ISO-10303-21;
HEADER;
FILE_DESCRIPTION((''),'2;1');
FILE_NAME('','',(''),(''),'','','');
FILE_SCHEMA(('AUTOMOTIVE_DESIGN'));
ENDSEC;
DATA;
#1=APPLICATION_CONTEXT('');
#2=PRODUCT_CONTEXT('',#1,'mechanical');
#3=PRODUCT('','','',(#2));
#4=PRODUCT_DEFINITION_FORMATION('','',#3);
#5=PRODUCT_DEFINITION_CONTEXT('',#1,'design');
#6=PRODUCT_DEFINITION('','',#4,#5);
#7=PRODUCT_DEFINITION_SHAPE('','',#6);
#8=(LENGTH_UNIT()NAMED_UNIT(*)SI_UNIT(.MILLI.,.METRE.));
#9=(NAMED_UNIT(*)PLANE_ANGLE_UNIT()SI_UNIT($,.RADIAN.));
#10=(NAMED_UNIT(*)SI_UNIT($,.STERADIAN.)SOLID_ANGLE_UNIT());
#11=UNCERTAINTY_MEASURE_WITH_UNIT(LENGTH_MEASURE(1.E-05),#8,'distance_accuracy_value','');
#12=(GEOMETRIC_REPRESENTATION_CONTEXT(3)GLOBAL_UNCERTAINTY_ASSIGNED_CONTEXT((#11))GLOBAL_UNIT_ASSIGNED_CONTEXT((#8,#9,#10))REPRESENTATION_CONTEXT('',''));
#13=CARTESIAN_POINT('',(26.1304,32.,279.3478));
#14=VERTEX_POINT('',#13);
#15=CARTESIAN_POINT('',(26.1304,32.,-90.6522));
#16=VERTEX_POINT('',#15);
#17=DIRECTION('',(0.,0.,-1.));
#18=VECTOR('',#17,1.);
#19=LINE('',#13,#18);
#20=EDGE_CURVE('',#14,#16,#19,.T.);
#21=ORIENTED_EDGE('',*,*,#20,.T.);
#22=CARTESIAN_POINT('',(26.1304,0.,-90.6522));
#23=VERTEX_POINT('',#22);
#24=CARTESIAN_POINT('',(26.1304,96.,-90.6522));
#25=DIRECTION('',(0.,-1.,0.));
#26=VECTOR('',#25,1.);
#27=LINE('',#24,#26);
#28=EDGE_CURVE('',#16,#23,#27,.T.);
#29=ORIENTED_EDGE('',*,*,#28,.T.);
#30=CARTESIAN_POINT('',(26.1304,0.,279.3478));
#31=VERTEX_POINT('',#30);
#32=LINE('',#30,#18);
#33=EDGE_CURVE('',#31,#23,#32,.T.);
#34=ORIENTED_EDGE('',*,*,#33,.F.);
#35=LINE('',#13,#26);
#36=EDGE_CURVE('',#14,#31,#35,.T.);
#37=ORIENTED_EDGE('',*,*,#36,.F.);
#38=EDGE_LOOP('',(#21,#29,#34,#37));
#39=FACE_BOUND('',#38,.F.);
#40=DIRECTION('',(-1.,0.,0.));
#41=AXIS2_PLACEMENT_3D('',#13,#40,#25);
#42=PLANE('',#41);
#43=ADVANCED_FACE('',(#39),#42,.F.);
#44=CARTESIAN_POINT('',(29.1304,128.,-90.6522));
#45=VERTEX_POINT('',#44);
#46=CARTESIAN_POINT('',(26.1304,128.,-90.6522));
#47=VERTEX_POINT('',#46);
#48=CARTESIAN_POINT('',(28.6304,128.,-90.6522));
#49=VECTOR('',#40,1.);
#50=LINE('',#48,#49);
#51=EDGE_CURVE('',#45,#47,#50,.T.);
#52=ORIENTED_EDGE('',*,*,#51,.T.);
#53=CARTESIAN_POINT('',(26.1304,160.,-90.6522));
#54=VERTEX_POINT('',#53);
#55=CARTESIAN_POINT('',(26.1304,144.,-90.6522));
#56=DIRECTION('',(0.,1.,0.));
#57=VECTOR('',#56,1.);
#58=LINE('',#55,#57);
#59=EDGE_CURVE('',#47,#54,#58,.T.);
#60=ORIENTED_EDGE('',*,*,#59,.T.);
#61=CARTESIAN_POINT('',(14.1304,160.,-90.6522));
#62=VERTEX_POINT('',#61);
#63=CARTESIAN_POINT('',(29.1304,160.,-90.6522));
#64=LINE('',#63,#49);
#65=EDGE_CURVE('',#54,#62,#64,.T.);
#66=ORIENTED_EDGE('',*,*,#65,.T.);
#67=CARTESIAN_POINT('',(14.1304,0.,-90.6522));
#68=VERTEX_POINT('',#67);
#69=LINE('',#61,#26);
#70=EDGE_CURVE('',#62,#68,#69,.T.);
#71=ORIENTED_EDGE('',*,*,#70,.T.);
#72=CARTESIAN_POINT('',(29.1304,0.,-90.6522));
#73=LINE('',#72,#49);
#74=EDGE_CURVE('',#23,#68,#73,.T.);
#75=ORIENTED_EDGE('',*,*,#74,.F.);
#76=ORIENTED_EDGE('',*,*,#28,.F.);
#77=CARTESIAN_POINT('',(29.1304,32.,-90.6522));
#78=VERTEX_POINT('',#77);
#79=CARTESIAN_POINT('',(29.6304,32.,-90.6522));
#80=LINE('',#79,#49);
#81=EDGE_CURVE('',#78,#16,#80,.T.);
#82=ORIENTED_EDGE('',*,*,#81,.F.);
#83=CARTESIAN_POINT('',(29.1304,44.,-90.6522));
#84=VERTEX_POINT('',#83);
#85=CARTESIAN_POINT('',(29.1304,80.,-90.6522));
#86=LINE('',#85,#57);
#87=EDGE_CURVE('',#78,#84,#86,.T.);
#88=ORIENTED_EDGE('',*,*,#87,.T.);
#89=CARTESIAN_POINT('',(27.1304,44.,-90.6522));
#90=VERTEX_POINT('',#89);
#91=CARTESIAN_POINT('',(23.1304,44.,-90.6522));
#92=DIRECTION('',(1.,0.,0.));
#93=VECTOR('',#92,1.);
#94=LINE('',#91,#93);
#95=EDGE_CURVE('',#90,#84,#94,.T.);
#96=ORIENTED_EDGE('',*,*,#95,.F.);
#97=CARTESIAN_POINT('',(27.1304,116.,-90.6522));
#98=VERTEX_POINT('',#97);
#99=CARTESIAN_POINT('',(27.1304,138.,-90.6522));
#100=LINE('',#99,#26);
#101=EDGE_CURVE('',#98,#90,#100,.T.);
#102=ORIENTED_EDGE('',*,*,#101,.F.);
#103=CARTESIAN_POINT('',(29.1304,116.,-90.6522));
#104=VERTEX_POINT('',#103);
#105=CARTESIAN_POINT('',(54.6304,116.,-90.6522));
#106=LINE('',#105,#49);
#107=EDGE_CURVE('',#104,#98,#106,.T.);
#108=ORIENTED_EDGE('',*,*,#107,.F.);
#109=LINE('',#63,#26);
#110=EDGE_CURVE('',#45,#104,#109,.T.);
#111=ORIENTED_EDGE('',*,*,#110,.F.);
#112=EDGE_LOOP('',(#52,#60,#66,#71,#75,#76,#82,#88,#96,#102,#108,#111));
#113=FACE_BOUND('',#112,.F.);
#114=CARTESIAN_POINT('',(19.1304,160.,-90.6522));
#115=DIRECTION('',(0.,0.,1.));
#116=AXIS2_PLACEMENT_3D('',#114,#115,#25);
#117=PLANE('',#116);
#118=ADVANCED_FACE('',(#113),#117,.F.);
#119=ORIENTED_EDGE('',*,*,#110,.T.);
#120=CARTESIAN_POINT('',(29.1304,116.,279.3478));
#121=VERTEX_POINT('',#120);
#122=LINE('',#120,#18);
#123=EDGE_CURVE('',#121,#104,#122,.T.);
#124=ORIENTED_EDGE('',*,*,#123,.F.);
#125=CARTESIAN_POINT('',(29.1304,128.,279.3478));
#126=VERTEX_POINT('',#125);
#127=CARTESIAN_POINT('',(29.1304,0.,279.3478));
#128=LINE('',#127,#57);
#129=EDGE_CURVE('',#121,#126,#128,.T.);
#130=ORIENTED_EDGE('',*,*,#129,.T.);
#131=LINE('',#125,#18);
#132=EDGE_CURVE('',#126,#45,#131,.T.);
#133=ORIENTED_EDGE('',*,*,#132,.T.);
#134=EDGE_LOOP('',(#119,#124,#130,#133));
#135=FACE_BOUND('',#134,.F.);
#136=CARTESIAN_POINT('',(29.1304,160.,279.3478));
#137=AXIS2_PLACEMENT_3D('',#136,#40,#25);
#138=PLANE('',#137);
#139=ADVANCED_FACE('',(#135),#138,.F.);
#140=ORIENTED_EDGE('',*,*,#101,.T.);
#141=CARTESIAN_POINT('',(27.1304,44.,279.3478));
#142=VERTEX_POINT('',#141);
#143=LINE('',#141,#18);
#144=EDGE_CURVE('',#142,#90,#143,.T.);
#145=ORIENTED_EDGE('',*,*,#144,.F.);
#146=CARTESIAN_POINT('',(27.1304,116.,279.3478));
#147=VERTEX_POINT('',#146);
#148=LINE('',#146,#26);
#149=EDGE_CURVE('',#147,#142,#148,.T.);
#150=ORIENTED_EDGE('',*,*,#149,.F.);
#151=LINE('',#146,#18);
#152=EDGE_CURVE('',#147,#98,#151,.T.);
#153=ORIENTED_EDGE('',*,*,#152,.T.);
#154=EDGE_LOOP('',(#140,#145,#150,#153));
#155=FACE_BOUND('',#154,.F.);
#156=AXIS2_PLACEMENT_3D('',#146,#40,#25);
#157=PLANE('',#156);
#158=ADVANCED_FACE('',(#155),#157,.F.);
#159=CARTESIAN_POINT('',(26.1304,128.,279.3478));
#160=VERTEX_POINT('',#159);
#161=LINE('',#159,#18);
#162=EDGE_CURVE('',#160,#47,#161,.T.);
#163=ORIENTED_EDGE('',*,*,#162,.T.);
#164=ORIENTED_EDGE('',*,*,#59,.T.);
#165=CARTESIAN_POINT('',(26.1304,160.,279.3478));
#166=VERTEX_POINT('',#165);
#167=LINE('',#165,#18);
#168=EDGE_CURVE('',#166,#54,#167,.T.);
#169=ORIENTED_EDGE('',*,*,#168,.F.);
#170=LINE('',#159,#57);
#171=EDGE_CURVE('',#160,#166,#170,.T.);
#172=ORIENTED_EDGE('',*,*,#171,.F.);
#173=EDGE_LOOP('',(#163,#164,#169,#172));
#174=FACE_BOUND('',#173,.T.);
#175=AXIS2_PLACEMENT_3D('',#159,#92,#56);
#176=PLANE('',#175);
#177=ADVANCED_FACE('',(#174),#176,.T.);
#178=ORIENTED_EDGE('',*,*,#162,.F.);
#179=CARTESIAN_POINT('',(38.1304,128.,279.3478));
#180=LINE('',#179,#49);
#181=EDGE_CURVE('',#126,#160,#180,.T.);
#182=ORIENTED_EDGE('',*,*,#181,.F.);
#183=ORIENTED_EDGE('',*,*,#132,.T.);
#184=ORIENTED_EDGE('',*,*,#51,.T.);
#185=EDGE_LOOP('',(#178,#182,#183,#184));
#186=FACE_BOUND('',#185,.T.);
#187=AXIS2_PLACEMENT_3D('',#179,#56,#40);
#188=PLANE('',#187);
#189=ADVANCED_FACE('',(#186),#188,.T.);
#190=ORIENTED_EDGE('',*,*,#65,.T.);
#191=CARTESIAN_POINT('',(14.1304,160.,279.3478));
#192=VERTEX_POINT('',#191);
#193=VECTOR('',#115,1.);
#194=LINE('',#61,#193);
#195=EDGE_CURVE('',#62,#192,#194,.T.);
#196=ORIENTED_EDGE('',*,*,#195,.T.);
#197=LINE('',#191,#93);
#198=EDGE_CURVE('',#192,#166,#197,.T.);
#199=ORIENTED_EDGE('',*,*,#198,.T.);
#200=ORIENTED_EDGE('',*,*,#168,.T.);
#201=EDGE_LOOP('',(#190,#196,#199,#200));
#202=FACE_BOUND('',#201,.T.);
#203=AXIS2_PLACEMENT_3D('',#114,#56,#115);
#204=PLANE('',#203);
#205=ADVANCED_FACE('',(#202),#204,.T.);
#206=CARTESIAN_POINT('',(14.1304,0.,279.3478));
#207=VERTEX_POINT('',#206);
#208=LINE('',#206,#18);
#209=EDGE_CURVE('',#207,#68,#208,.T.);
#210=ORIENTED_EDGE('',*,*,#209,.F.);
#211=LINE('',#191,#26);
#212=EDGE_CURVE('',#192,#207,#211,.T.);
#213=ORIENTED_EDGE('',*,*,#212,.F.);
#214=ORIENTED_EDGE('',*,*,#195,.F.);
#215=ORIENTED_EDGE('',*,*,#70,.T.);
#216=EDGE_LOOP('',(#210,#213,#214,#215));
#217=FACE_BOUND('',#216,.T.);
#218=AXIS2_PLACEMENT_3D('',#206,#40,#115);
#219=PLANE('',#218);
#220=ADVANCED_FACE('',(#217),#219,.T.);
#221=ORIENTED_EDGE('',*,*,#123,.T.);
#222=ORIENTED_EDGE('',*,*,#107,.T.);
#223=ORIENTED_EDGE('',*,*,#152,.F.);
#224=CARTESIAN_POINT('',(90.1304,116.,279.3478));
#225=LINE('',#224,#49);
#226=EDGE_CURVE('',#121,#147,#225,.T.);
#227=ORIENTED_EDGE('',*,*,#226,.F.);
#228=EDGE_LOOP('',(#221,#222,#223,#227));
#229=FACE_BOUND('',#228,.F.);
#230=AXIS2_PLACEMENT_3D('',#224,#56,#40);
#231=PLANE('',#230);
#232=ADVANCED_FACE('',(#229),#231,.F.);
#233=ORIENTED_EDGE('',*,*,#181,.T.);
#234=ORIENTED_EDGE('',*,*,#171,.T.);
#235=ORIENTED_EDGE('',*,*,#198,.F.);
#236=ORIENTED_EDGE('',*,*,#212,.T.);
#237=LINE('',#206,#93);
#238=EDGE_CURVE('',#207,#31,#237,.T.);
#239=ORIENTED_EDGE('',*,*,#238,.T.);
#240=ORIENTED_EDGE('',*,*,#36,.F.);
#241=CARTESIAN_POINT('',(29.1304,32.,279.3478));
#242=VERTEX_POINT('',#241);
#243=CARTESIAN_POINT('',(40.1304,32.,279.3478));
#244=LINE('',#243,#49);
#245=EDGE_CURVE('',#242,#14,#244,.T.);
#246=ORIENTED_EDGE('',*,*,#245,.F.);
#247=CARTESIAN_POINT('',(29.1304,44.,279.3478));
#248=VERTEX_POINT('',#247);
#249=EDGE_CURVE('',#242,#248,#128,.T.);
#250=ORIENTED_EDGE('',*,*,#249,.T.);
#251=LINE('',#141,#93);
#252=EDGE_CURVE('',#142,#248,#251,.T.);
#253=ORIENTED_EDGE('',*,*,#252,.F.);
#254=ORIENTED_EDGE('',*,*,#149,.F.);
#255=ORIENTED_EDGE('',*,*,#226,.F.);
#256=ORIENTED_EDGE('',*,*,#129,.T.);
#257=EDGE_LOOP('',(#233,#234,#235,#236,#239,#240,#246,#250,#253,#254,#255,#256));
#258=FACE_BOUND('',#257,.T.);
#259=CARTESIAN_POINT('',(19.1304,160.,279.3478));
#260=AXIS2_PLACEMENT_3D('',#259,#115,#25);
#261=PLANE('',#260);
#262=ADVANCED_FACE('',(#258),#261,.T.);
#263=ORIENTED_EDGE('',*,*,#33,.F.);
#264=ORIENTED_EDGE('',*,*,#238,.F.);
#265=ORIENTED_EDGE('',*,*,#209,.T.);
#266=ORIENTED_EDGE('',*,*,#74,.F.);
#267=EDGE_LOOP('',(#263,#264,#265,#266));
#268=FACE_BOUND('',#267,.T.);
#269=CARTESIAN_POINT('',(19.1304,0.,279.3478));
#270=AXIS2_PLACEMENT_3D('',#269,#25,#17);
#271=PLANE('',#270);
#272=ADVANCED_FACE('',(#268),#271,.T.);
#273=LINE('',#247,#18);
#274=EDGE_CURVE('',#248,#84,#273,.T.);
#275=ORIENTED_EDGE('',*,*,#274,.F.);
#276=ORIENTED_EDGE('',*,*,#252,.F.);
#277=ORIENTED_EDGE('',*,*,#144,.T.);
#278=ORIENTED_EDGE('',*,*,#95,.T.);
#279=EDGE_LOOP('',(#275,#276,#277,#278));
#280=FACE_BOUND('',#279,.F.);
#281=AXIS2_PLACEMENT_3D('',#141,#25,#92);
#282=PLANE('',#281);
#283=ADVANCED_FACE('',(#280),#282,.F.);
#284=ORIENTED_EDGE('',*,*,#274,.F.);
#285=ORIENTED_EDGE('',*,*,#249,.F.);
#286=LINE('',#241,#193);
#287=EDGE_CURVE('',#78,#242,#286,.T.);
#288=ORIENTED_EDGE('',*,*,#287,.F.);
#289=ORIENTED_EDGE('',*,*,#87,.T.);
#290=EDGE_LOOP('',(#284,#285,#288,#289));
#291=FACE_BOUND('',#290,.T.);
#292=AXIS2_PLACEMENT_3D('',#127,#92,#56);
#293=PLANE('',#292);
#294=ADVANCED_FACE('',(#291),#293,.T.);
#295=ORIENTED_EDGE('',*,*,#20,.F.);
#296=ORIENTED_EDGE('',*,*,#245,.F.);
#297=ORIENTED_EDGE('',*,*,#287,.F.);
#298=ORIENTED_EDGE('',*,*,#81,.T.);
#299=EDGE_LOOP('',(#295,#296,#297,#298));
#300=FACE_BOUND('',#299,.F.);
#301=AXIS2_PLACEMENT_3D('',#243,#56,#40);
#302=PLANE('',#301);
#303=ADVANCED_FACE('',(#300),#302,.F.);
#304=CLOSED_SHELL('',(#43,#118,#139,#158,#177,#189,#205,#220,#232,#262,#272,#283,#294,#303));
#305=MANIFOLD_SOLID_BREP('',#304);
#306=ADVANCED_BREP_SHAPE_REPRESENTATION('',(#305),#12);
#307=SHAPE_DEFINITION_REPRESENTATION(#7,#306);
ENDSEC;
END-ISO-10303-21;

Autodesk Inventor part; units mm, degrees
ref_plane "YZ Plane" through (0, 0, 0) normal (1, 0, 0) x (0, 1, 0)
ref_plane "XZ Plane" through (0, 0, 0) normal (0, 1, 0) x (-1, 0, 0)
ref_plane "XY Plane" through (0, 0, 0) normal (0, 0, 1) x (1, 0, 0)
sketch "Sketch1" plane through (0, 0, 0) normal (0, 1, 0) x (-1, 0, 0)
  line L0 (0, 279.3478) -> (-39.1304, 279.3478)
  line L1 (-39.1304, 279.3478) -> (-39.1304, -195.6522)
  line L2 (-39.1304, -195.6522) -> (0, -195.6522)
  line L3 (0, -195.6522) -> (0, 279.3478)
  line L4 (-39.1304, 279.3478) -> (-29.1304, 279.3478)
  line L5 (-29.1304, 254.3478) -> (-39.1304, 254.3478)
  line L6 (-39.1304, 254.3478) -> (-39.1304, 279.3478)
  line L7 (-39.1304, -195.6522) -> (-29.1304, -195.6522)
  line L8 (-29.1304, -170.6522) -> (-39.1304, -170.6522)
  line L9 (-39.1304, -170.6522) -> (-39.1304, -195.6522)
  point P0 (0, 0)
  point P1 (-39.1304, 254.3478)
  dimension "d0" = 475
  dimension "d4" = 25
  dimension "d5" = 25
extrude "Extrusion1" add sketch "Sketch1" along normal blind 160
sketch "Sketch2" plane through (0, 0, 279.3478) normal (0, 0, 1) x (1, 0, 0)
  line L0 (0, 160) -> (39.1304, 160) projected
  line L1 (0, 160) -> (39.1304, 160)
  line L2 (39.1304, 160) -> (39.1304, 0)
  line L3 (39.1304, 0) -> (0, 0)
  line L4 (0, 0) -> (0, 160)
  line L5 (39.1304, 160) -> (29.1304, 160)
  line L6 (29.1304, 160) -> (29.1304, 115)
  line L7 (29.1304, 115) -> (39.1304, 115)
  line L8 (39.1304, 115) -> (39.1304, 160)
  line L9 (39.1304, 0) -> (29.1304, 0)
  line L10 (29.1304, 0) -> (29.1304, 45)
  line L11 (29.1304, 45) -> (39.1304, 45)
  line L12 (39.1304, 45) -> (39.1304, 0)
  circle A0 centre (39.1304, 80) radius 18
  line L13 (35.1304, 75) -> (39.1304, 75)
  line L14 (39.1304, 75) -> (39.1304, 98)
  line L15 (39.1304, 98) -> (35.1304, 98)
  line L16 (35.1304, 98) -> (35.1304, 75)
  line L17 (35.1304, 75) -> (39.1304, 75)
  line L18 (39.1304, 75) -> (39.1304, 62)
  line L19 (39.1304, 62) -> (35.1304, 62)
  line L20 (35.1304, 62) -> (35.1304, 75)
  line L21 (39.1304, 0) -> (39.1304, 160) projected
  line L22 (0, 160) -> (19.1304, 160)
  line L23 (19.1304, 160) -> (19.1304, 0)
  line L24 (19.1304, 0) -> (0, 0)
  line L25 (0, 0) -> (0, 160)
  point P0 (0, 0)
  point P1 (34.1304, 115)
  point P2 (34.1304, 160)
  point P3 (39.1304, 45)
  point P4 (39.1304, 115)
  dimension "d6" = 10
  dimension "d7" = 45
  dimension "d8" = 45
  dimension "d9" = 4
  dimension "d10" = 36
  dimension "d11" = 80
  dimension "d12" = 80
  dimension "d15" = 20
extrude "Extrusion2" cut sketch "Sketch2" against normal up to surface (475 mm away) contours L0 L23 L3 L4 | L0 L2 L7 L6 | L10 L11 L2 L3 | L2 L13 L16 A0 | A0 L16 L15 | L2 A0 L20 L13 | L19 L20 A0
sketch "Sketch3" plane through (0, 160, 0) normal (0, 1, 0) x (1, 0, 0)
  line L0 (-18, 249) -> (160, 249)
  line L1 (160, 249) -> (160, 90.6522)
  line L2 (160, 90.6522) -> (-18, 90.6522)
  line L3 (-18, 90.6522) -> (-18, 249)
  line L4 (19.1304, -279.3478) -> (29.1304, -279.3478) projected
  point P0 (0, 0)
  dimension "d16" = 370
extrude "Extrusion3" cut sketch "Sketch3" against normal blind 200
sketch "Sketch4" plane through (39.1304, 98, 279.3478) normal (1, 0, 0) x (0, 0, -1)
  line L0 (370, 0) -> (370, 17) projected
  line L1 (370, 17) -> (0, 17) projected
  line L2 (0, 0) -> (0, 17) projected
  line L3 (0, 0) -> (370, 0) projected
  line L4 (370, -53) -> (370, -36) projected
  line L5 (370, -36) -> (0, -36) projected
  line L6 (0, -53) -> (0, -36) projected
  line L7 (0, -53) -> (370, -53) projected
  point P0 (279.3478, -98)
extrude "Extrusion4" add sketch "Sketch4" along normal blind 30
sketch "Sketch5" plane through (19.1304, 0, 279.3478) normal (-1, 0, 0) x (0, 0, 1)
  line L0 (-370, 160) -> (-370, 0) projected
  line L1 (0, 0) -> (-370, 0) projected
  line L2 (0, 160) -> (0, 0) projected
  line L3 (-370, 160) -> (0, 160) projected
  point P0 (-279.3478, 0)
extrude "Extrusion5" add sketch "Sketch5" along normal blind 5
sketch "Sketch6" plane through (29.1304, 115, 279.3478) normal (0, 0, 1) x (1, 0, 0)
  line L0 (9, 13) -> (-3, 13)
  line L1 (-3, 13) -> (-3, 45)
  line L2 (-3, 45) -> (9, 45)
  line L3 (9, 45) -> (9, 13)
  line L4 (-15, -115) -> (0, -115) projected
  line L5 (11, -83) -> (-3, -83)
  line L6 (-3, -83) -> (-3, -115)
  line L7 (-3, -115) -> (11, -115)
  line L8 (11, -115) -> (11, -83)
  line L9 (0, -70) -> (40, -70) projected
  line L10 (0, 0) -> (40, 0) projected
  line L11 (0, 0) -> (0, 45) projected
  point P0 (-29.1304, -115)
  point P1 (0, -115)
  dimension "d23" = 13
  dimension "d24" = 13
  dimension "d25" = 3
extrude "Extrusion6" cut sketch "Sketch6" against normal blind 500
sketch "Sketch7" plane through (35.1304, 62, 279.3478) normal (0, 0, 1) x (1, 0, 0)
  line L0 (55, 54) -> (-8, 54)
  line L1 (-8, 54) -> (-8, -18)
  line L2 (-8, -18) -> (55, -18)
  line L3 (55, -18) -> (55, 54)
  line L4 (-6, 53) -> (34, 53) projected
  line L5 (-6, -17) -> (34, -17) projected
  line L6 (-6, -30) -> (-6, -17) projected
  point P0 (-35.1304, -62)
  dimension "d28" = 1
  dimension "d29" = 1
  dimension "d30" = 2
extrude "Extrusion7" cut sketch "Sketch7" against normal blind 1000
properties part number "MainRails" material "Aluminum 6061"
